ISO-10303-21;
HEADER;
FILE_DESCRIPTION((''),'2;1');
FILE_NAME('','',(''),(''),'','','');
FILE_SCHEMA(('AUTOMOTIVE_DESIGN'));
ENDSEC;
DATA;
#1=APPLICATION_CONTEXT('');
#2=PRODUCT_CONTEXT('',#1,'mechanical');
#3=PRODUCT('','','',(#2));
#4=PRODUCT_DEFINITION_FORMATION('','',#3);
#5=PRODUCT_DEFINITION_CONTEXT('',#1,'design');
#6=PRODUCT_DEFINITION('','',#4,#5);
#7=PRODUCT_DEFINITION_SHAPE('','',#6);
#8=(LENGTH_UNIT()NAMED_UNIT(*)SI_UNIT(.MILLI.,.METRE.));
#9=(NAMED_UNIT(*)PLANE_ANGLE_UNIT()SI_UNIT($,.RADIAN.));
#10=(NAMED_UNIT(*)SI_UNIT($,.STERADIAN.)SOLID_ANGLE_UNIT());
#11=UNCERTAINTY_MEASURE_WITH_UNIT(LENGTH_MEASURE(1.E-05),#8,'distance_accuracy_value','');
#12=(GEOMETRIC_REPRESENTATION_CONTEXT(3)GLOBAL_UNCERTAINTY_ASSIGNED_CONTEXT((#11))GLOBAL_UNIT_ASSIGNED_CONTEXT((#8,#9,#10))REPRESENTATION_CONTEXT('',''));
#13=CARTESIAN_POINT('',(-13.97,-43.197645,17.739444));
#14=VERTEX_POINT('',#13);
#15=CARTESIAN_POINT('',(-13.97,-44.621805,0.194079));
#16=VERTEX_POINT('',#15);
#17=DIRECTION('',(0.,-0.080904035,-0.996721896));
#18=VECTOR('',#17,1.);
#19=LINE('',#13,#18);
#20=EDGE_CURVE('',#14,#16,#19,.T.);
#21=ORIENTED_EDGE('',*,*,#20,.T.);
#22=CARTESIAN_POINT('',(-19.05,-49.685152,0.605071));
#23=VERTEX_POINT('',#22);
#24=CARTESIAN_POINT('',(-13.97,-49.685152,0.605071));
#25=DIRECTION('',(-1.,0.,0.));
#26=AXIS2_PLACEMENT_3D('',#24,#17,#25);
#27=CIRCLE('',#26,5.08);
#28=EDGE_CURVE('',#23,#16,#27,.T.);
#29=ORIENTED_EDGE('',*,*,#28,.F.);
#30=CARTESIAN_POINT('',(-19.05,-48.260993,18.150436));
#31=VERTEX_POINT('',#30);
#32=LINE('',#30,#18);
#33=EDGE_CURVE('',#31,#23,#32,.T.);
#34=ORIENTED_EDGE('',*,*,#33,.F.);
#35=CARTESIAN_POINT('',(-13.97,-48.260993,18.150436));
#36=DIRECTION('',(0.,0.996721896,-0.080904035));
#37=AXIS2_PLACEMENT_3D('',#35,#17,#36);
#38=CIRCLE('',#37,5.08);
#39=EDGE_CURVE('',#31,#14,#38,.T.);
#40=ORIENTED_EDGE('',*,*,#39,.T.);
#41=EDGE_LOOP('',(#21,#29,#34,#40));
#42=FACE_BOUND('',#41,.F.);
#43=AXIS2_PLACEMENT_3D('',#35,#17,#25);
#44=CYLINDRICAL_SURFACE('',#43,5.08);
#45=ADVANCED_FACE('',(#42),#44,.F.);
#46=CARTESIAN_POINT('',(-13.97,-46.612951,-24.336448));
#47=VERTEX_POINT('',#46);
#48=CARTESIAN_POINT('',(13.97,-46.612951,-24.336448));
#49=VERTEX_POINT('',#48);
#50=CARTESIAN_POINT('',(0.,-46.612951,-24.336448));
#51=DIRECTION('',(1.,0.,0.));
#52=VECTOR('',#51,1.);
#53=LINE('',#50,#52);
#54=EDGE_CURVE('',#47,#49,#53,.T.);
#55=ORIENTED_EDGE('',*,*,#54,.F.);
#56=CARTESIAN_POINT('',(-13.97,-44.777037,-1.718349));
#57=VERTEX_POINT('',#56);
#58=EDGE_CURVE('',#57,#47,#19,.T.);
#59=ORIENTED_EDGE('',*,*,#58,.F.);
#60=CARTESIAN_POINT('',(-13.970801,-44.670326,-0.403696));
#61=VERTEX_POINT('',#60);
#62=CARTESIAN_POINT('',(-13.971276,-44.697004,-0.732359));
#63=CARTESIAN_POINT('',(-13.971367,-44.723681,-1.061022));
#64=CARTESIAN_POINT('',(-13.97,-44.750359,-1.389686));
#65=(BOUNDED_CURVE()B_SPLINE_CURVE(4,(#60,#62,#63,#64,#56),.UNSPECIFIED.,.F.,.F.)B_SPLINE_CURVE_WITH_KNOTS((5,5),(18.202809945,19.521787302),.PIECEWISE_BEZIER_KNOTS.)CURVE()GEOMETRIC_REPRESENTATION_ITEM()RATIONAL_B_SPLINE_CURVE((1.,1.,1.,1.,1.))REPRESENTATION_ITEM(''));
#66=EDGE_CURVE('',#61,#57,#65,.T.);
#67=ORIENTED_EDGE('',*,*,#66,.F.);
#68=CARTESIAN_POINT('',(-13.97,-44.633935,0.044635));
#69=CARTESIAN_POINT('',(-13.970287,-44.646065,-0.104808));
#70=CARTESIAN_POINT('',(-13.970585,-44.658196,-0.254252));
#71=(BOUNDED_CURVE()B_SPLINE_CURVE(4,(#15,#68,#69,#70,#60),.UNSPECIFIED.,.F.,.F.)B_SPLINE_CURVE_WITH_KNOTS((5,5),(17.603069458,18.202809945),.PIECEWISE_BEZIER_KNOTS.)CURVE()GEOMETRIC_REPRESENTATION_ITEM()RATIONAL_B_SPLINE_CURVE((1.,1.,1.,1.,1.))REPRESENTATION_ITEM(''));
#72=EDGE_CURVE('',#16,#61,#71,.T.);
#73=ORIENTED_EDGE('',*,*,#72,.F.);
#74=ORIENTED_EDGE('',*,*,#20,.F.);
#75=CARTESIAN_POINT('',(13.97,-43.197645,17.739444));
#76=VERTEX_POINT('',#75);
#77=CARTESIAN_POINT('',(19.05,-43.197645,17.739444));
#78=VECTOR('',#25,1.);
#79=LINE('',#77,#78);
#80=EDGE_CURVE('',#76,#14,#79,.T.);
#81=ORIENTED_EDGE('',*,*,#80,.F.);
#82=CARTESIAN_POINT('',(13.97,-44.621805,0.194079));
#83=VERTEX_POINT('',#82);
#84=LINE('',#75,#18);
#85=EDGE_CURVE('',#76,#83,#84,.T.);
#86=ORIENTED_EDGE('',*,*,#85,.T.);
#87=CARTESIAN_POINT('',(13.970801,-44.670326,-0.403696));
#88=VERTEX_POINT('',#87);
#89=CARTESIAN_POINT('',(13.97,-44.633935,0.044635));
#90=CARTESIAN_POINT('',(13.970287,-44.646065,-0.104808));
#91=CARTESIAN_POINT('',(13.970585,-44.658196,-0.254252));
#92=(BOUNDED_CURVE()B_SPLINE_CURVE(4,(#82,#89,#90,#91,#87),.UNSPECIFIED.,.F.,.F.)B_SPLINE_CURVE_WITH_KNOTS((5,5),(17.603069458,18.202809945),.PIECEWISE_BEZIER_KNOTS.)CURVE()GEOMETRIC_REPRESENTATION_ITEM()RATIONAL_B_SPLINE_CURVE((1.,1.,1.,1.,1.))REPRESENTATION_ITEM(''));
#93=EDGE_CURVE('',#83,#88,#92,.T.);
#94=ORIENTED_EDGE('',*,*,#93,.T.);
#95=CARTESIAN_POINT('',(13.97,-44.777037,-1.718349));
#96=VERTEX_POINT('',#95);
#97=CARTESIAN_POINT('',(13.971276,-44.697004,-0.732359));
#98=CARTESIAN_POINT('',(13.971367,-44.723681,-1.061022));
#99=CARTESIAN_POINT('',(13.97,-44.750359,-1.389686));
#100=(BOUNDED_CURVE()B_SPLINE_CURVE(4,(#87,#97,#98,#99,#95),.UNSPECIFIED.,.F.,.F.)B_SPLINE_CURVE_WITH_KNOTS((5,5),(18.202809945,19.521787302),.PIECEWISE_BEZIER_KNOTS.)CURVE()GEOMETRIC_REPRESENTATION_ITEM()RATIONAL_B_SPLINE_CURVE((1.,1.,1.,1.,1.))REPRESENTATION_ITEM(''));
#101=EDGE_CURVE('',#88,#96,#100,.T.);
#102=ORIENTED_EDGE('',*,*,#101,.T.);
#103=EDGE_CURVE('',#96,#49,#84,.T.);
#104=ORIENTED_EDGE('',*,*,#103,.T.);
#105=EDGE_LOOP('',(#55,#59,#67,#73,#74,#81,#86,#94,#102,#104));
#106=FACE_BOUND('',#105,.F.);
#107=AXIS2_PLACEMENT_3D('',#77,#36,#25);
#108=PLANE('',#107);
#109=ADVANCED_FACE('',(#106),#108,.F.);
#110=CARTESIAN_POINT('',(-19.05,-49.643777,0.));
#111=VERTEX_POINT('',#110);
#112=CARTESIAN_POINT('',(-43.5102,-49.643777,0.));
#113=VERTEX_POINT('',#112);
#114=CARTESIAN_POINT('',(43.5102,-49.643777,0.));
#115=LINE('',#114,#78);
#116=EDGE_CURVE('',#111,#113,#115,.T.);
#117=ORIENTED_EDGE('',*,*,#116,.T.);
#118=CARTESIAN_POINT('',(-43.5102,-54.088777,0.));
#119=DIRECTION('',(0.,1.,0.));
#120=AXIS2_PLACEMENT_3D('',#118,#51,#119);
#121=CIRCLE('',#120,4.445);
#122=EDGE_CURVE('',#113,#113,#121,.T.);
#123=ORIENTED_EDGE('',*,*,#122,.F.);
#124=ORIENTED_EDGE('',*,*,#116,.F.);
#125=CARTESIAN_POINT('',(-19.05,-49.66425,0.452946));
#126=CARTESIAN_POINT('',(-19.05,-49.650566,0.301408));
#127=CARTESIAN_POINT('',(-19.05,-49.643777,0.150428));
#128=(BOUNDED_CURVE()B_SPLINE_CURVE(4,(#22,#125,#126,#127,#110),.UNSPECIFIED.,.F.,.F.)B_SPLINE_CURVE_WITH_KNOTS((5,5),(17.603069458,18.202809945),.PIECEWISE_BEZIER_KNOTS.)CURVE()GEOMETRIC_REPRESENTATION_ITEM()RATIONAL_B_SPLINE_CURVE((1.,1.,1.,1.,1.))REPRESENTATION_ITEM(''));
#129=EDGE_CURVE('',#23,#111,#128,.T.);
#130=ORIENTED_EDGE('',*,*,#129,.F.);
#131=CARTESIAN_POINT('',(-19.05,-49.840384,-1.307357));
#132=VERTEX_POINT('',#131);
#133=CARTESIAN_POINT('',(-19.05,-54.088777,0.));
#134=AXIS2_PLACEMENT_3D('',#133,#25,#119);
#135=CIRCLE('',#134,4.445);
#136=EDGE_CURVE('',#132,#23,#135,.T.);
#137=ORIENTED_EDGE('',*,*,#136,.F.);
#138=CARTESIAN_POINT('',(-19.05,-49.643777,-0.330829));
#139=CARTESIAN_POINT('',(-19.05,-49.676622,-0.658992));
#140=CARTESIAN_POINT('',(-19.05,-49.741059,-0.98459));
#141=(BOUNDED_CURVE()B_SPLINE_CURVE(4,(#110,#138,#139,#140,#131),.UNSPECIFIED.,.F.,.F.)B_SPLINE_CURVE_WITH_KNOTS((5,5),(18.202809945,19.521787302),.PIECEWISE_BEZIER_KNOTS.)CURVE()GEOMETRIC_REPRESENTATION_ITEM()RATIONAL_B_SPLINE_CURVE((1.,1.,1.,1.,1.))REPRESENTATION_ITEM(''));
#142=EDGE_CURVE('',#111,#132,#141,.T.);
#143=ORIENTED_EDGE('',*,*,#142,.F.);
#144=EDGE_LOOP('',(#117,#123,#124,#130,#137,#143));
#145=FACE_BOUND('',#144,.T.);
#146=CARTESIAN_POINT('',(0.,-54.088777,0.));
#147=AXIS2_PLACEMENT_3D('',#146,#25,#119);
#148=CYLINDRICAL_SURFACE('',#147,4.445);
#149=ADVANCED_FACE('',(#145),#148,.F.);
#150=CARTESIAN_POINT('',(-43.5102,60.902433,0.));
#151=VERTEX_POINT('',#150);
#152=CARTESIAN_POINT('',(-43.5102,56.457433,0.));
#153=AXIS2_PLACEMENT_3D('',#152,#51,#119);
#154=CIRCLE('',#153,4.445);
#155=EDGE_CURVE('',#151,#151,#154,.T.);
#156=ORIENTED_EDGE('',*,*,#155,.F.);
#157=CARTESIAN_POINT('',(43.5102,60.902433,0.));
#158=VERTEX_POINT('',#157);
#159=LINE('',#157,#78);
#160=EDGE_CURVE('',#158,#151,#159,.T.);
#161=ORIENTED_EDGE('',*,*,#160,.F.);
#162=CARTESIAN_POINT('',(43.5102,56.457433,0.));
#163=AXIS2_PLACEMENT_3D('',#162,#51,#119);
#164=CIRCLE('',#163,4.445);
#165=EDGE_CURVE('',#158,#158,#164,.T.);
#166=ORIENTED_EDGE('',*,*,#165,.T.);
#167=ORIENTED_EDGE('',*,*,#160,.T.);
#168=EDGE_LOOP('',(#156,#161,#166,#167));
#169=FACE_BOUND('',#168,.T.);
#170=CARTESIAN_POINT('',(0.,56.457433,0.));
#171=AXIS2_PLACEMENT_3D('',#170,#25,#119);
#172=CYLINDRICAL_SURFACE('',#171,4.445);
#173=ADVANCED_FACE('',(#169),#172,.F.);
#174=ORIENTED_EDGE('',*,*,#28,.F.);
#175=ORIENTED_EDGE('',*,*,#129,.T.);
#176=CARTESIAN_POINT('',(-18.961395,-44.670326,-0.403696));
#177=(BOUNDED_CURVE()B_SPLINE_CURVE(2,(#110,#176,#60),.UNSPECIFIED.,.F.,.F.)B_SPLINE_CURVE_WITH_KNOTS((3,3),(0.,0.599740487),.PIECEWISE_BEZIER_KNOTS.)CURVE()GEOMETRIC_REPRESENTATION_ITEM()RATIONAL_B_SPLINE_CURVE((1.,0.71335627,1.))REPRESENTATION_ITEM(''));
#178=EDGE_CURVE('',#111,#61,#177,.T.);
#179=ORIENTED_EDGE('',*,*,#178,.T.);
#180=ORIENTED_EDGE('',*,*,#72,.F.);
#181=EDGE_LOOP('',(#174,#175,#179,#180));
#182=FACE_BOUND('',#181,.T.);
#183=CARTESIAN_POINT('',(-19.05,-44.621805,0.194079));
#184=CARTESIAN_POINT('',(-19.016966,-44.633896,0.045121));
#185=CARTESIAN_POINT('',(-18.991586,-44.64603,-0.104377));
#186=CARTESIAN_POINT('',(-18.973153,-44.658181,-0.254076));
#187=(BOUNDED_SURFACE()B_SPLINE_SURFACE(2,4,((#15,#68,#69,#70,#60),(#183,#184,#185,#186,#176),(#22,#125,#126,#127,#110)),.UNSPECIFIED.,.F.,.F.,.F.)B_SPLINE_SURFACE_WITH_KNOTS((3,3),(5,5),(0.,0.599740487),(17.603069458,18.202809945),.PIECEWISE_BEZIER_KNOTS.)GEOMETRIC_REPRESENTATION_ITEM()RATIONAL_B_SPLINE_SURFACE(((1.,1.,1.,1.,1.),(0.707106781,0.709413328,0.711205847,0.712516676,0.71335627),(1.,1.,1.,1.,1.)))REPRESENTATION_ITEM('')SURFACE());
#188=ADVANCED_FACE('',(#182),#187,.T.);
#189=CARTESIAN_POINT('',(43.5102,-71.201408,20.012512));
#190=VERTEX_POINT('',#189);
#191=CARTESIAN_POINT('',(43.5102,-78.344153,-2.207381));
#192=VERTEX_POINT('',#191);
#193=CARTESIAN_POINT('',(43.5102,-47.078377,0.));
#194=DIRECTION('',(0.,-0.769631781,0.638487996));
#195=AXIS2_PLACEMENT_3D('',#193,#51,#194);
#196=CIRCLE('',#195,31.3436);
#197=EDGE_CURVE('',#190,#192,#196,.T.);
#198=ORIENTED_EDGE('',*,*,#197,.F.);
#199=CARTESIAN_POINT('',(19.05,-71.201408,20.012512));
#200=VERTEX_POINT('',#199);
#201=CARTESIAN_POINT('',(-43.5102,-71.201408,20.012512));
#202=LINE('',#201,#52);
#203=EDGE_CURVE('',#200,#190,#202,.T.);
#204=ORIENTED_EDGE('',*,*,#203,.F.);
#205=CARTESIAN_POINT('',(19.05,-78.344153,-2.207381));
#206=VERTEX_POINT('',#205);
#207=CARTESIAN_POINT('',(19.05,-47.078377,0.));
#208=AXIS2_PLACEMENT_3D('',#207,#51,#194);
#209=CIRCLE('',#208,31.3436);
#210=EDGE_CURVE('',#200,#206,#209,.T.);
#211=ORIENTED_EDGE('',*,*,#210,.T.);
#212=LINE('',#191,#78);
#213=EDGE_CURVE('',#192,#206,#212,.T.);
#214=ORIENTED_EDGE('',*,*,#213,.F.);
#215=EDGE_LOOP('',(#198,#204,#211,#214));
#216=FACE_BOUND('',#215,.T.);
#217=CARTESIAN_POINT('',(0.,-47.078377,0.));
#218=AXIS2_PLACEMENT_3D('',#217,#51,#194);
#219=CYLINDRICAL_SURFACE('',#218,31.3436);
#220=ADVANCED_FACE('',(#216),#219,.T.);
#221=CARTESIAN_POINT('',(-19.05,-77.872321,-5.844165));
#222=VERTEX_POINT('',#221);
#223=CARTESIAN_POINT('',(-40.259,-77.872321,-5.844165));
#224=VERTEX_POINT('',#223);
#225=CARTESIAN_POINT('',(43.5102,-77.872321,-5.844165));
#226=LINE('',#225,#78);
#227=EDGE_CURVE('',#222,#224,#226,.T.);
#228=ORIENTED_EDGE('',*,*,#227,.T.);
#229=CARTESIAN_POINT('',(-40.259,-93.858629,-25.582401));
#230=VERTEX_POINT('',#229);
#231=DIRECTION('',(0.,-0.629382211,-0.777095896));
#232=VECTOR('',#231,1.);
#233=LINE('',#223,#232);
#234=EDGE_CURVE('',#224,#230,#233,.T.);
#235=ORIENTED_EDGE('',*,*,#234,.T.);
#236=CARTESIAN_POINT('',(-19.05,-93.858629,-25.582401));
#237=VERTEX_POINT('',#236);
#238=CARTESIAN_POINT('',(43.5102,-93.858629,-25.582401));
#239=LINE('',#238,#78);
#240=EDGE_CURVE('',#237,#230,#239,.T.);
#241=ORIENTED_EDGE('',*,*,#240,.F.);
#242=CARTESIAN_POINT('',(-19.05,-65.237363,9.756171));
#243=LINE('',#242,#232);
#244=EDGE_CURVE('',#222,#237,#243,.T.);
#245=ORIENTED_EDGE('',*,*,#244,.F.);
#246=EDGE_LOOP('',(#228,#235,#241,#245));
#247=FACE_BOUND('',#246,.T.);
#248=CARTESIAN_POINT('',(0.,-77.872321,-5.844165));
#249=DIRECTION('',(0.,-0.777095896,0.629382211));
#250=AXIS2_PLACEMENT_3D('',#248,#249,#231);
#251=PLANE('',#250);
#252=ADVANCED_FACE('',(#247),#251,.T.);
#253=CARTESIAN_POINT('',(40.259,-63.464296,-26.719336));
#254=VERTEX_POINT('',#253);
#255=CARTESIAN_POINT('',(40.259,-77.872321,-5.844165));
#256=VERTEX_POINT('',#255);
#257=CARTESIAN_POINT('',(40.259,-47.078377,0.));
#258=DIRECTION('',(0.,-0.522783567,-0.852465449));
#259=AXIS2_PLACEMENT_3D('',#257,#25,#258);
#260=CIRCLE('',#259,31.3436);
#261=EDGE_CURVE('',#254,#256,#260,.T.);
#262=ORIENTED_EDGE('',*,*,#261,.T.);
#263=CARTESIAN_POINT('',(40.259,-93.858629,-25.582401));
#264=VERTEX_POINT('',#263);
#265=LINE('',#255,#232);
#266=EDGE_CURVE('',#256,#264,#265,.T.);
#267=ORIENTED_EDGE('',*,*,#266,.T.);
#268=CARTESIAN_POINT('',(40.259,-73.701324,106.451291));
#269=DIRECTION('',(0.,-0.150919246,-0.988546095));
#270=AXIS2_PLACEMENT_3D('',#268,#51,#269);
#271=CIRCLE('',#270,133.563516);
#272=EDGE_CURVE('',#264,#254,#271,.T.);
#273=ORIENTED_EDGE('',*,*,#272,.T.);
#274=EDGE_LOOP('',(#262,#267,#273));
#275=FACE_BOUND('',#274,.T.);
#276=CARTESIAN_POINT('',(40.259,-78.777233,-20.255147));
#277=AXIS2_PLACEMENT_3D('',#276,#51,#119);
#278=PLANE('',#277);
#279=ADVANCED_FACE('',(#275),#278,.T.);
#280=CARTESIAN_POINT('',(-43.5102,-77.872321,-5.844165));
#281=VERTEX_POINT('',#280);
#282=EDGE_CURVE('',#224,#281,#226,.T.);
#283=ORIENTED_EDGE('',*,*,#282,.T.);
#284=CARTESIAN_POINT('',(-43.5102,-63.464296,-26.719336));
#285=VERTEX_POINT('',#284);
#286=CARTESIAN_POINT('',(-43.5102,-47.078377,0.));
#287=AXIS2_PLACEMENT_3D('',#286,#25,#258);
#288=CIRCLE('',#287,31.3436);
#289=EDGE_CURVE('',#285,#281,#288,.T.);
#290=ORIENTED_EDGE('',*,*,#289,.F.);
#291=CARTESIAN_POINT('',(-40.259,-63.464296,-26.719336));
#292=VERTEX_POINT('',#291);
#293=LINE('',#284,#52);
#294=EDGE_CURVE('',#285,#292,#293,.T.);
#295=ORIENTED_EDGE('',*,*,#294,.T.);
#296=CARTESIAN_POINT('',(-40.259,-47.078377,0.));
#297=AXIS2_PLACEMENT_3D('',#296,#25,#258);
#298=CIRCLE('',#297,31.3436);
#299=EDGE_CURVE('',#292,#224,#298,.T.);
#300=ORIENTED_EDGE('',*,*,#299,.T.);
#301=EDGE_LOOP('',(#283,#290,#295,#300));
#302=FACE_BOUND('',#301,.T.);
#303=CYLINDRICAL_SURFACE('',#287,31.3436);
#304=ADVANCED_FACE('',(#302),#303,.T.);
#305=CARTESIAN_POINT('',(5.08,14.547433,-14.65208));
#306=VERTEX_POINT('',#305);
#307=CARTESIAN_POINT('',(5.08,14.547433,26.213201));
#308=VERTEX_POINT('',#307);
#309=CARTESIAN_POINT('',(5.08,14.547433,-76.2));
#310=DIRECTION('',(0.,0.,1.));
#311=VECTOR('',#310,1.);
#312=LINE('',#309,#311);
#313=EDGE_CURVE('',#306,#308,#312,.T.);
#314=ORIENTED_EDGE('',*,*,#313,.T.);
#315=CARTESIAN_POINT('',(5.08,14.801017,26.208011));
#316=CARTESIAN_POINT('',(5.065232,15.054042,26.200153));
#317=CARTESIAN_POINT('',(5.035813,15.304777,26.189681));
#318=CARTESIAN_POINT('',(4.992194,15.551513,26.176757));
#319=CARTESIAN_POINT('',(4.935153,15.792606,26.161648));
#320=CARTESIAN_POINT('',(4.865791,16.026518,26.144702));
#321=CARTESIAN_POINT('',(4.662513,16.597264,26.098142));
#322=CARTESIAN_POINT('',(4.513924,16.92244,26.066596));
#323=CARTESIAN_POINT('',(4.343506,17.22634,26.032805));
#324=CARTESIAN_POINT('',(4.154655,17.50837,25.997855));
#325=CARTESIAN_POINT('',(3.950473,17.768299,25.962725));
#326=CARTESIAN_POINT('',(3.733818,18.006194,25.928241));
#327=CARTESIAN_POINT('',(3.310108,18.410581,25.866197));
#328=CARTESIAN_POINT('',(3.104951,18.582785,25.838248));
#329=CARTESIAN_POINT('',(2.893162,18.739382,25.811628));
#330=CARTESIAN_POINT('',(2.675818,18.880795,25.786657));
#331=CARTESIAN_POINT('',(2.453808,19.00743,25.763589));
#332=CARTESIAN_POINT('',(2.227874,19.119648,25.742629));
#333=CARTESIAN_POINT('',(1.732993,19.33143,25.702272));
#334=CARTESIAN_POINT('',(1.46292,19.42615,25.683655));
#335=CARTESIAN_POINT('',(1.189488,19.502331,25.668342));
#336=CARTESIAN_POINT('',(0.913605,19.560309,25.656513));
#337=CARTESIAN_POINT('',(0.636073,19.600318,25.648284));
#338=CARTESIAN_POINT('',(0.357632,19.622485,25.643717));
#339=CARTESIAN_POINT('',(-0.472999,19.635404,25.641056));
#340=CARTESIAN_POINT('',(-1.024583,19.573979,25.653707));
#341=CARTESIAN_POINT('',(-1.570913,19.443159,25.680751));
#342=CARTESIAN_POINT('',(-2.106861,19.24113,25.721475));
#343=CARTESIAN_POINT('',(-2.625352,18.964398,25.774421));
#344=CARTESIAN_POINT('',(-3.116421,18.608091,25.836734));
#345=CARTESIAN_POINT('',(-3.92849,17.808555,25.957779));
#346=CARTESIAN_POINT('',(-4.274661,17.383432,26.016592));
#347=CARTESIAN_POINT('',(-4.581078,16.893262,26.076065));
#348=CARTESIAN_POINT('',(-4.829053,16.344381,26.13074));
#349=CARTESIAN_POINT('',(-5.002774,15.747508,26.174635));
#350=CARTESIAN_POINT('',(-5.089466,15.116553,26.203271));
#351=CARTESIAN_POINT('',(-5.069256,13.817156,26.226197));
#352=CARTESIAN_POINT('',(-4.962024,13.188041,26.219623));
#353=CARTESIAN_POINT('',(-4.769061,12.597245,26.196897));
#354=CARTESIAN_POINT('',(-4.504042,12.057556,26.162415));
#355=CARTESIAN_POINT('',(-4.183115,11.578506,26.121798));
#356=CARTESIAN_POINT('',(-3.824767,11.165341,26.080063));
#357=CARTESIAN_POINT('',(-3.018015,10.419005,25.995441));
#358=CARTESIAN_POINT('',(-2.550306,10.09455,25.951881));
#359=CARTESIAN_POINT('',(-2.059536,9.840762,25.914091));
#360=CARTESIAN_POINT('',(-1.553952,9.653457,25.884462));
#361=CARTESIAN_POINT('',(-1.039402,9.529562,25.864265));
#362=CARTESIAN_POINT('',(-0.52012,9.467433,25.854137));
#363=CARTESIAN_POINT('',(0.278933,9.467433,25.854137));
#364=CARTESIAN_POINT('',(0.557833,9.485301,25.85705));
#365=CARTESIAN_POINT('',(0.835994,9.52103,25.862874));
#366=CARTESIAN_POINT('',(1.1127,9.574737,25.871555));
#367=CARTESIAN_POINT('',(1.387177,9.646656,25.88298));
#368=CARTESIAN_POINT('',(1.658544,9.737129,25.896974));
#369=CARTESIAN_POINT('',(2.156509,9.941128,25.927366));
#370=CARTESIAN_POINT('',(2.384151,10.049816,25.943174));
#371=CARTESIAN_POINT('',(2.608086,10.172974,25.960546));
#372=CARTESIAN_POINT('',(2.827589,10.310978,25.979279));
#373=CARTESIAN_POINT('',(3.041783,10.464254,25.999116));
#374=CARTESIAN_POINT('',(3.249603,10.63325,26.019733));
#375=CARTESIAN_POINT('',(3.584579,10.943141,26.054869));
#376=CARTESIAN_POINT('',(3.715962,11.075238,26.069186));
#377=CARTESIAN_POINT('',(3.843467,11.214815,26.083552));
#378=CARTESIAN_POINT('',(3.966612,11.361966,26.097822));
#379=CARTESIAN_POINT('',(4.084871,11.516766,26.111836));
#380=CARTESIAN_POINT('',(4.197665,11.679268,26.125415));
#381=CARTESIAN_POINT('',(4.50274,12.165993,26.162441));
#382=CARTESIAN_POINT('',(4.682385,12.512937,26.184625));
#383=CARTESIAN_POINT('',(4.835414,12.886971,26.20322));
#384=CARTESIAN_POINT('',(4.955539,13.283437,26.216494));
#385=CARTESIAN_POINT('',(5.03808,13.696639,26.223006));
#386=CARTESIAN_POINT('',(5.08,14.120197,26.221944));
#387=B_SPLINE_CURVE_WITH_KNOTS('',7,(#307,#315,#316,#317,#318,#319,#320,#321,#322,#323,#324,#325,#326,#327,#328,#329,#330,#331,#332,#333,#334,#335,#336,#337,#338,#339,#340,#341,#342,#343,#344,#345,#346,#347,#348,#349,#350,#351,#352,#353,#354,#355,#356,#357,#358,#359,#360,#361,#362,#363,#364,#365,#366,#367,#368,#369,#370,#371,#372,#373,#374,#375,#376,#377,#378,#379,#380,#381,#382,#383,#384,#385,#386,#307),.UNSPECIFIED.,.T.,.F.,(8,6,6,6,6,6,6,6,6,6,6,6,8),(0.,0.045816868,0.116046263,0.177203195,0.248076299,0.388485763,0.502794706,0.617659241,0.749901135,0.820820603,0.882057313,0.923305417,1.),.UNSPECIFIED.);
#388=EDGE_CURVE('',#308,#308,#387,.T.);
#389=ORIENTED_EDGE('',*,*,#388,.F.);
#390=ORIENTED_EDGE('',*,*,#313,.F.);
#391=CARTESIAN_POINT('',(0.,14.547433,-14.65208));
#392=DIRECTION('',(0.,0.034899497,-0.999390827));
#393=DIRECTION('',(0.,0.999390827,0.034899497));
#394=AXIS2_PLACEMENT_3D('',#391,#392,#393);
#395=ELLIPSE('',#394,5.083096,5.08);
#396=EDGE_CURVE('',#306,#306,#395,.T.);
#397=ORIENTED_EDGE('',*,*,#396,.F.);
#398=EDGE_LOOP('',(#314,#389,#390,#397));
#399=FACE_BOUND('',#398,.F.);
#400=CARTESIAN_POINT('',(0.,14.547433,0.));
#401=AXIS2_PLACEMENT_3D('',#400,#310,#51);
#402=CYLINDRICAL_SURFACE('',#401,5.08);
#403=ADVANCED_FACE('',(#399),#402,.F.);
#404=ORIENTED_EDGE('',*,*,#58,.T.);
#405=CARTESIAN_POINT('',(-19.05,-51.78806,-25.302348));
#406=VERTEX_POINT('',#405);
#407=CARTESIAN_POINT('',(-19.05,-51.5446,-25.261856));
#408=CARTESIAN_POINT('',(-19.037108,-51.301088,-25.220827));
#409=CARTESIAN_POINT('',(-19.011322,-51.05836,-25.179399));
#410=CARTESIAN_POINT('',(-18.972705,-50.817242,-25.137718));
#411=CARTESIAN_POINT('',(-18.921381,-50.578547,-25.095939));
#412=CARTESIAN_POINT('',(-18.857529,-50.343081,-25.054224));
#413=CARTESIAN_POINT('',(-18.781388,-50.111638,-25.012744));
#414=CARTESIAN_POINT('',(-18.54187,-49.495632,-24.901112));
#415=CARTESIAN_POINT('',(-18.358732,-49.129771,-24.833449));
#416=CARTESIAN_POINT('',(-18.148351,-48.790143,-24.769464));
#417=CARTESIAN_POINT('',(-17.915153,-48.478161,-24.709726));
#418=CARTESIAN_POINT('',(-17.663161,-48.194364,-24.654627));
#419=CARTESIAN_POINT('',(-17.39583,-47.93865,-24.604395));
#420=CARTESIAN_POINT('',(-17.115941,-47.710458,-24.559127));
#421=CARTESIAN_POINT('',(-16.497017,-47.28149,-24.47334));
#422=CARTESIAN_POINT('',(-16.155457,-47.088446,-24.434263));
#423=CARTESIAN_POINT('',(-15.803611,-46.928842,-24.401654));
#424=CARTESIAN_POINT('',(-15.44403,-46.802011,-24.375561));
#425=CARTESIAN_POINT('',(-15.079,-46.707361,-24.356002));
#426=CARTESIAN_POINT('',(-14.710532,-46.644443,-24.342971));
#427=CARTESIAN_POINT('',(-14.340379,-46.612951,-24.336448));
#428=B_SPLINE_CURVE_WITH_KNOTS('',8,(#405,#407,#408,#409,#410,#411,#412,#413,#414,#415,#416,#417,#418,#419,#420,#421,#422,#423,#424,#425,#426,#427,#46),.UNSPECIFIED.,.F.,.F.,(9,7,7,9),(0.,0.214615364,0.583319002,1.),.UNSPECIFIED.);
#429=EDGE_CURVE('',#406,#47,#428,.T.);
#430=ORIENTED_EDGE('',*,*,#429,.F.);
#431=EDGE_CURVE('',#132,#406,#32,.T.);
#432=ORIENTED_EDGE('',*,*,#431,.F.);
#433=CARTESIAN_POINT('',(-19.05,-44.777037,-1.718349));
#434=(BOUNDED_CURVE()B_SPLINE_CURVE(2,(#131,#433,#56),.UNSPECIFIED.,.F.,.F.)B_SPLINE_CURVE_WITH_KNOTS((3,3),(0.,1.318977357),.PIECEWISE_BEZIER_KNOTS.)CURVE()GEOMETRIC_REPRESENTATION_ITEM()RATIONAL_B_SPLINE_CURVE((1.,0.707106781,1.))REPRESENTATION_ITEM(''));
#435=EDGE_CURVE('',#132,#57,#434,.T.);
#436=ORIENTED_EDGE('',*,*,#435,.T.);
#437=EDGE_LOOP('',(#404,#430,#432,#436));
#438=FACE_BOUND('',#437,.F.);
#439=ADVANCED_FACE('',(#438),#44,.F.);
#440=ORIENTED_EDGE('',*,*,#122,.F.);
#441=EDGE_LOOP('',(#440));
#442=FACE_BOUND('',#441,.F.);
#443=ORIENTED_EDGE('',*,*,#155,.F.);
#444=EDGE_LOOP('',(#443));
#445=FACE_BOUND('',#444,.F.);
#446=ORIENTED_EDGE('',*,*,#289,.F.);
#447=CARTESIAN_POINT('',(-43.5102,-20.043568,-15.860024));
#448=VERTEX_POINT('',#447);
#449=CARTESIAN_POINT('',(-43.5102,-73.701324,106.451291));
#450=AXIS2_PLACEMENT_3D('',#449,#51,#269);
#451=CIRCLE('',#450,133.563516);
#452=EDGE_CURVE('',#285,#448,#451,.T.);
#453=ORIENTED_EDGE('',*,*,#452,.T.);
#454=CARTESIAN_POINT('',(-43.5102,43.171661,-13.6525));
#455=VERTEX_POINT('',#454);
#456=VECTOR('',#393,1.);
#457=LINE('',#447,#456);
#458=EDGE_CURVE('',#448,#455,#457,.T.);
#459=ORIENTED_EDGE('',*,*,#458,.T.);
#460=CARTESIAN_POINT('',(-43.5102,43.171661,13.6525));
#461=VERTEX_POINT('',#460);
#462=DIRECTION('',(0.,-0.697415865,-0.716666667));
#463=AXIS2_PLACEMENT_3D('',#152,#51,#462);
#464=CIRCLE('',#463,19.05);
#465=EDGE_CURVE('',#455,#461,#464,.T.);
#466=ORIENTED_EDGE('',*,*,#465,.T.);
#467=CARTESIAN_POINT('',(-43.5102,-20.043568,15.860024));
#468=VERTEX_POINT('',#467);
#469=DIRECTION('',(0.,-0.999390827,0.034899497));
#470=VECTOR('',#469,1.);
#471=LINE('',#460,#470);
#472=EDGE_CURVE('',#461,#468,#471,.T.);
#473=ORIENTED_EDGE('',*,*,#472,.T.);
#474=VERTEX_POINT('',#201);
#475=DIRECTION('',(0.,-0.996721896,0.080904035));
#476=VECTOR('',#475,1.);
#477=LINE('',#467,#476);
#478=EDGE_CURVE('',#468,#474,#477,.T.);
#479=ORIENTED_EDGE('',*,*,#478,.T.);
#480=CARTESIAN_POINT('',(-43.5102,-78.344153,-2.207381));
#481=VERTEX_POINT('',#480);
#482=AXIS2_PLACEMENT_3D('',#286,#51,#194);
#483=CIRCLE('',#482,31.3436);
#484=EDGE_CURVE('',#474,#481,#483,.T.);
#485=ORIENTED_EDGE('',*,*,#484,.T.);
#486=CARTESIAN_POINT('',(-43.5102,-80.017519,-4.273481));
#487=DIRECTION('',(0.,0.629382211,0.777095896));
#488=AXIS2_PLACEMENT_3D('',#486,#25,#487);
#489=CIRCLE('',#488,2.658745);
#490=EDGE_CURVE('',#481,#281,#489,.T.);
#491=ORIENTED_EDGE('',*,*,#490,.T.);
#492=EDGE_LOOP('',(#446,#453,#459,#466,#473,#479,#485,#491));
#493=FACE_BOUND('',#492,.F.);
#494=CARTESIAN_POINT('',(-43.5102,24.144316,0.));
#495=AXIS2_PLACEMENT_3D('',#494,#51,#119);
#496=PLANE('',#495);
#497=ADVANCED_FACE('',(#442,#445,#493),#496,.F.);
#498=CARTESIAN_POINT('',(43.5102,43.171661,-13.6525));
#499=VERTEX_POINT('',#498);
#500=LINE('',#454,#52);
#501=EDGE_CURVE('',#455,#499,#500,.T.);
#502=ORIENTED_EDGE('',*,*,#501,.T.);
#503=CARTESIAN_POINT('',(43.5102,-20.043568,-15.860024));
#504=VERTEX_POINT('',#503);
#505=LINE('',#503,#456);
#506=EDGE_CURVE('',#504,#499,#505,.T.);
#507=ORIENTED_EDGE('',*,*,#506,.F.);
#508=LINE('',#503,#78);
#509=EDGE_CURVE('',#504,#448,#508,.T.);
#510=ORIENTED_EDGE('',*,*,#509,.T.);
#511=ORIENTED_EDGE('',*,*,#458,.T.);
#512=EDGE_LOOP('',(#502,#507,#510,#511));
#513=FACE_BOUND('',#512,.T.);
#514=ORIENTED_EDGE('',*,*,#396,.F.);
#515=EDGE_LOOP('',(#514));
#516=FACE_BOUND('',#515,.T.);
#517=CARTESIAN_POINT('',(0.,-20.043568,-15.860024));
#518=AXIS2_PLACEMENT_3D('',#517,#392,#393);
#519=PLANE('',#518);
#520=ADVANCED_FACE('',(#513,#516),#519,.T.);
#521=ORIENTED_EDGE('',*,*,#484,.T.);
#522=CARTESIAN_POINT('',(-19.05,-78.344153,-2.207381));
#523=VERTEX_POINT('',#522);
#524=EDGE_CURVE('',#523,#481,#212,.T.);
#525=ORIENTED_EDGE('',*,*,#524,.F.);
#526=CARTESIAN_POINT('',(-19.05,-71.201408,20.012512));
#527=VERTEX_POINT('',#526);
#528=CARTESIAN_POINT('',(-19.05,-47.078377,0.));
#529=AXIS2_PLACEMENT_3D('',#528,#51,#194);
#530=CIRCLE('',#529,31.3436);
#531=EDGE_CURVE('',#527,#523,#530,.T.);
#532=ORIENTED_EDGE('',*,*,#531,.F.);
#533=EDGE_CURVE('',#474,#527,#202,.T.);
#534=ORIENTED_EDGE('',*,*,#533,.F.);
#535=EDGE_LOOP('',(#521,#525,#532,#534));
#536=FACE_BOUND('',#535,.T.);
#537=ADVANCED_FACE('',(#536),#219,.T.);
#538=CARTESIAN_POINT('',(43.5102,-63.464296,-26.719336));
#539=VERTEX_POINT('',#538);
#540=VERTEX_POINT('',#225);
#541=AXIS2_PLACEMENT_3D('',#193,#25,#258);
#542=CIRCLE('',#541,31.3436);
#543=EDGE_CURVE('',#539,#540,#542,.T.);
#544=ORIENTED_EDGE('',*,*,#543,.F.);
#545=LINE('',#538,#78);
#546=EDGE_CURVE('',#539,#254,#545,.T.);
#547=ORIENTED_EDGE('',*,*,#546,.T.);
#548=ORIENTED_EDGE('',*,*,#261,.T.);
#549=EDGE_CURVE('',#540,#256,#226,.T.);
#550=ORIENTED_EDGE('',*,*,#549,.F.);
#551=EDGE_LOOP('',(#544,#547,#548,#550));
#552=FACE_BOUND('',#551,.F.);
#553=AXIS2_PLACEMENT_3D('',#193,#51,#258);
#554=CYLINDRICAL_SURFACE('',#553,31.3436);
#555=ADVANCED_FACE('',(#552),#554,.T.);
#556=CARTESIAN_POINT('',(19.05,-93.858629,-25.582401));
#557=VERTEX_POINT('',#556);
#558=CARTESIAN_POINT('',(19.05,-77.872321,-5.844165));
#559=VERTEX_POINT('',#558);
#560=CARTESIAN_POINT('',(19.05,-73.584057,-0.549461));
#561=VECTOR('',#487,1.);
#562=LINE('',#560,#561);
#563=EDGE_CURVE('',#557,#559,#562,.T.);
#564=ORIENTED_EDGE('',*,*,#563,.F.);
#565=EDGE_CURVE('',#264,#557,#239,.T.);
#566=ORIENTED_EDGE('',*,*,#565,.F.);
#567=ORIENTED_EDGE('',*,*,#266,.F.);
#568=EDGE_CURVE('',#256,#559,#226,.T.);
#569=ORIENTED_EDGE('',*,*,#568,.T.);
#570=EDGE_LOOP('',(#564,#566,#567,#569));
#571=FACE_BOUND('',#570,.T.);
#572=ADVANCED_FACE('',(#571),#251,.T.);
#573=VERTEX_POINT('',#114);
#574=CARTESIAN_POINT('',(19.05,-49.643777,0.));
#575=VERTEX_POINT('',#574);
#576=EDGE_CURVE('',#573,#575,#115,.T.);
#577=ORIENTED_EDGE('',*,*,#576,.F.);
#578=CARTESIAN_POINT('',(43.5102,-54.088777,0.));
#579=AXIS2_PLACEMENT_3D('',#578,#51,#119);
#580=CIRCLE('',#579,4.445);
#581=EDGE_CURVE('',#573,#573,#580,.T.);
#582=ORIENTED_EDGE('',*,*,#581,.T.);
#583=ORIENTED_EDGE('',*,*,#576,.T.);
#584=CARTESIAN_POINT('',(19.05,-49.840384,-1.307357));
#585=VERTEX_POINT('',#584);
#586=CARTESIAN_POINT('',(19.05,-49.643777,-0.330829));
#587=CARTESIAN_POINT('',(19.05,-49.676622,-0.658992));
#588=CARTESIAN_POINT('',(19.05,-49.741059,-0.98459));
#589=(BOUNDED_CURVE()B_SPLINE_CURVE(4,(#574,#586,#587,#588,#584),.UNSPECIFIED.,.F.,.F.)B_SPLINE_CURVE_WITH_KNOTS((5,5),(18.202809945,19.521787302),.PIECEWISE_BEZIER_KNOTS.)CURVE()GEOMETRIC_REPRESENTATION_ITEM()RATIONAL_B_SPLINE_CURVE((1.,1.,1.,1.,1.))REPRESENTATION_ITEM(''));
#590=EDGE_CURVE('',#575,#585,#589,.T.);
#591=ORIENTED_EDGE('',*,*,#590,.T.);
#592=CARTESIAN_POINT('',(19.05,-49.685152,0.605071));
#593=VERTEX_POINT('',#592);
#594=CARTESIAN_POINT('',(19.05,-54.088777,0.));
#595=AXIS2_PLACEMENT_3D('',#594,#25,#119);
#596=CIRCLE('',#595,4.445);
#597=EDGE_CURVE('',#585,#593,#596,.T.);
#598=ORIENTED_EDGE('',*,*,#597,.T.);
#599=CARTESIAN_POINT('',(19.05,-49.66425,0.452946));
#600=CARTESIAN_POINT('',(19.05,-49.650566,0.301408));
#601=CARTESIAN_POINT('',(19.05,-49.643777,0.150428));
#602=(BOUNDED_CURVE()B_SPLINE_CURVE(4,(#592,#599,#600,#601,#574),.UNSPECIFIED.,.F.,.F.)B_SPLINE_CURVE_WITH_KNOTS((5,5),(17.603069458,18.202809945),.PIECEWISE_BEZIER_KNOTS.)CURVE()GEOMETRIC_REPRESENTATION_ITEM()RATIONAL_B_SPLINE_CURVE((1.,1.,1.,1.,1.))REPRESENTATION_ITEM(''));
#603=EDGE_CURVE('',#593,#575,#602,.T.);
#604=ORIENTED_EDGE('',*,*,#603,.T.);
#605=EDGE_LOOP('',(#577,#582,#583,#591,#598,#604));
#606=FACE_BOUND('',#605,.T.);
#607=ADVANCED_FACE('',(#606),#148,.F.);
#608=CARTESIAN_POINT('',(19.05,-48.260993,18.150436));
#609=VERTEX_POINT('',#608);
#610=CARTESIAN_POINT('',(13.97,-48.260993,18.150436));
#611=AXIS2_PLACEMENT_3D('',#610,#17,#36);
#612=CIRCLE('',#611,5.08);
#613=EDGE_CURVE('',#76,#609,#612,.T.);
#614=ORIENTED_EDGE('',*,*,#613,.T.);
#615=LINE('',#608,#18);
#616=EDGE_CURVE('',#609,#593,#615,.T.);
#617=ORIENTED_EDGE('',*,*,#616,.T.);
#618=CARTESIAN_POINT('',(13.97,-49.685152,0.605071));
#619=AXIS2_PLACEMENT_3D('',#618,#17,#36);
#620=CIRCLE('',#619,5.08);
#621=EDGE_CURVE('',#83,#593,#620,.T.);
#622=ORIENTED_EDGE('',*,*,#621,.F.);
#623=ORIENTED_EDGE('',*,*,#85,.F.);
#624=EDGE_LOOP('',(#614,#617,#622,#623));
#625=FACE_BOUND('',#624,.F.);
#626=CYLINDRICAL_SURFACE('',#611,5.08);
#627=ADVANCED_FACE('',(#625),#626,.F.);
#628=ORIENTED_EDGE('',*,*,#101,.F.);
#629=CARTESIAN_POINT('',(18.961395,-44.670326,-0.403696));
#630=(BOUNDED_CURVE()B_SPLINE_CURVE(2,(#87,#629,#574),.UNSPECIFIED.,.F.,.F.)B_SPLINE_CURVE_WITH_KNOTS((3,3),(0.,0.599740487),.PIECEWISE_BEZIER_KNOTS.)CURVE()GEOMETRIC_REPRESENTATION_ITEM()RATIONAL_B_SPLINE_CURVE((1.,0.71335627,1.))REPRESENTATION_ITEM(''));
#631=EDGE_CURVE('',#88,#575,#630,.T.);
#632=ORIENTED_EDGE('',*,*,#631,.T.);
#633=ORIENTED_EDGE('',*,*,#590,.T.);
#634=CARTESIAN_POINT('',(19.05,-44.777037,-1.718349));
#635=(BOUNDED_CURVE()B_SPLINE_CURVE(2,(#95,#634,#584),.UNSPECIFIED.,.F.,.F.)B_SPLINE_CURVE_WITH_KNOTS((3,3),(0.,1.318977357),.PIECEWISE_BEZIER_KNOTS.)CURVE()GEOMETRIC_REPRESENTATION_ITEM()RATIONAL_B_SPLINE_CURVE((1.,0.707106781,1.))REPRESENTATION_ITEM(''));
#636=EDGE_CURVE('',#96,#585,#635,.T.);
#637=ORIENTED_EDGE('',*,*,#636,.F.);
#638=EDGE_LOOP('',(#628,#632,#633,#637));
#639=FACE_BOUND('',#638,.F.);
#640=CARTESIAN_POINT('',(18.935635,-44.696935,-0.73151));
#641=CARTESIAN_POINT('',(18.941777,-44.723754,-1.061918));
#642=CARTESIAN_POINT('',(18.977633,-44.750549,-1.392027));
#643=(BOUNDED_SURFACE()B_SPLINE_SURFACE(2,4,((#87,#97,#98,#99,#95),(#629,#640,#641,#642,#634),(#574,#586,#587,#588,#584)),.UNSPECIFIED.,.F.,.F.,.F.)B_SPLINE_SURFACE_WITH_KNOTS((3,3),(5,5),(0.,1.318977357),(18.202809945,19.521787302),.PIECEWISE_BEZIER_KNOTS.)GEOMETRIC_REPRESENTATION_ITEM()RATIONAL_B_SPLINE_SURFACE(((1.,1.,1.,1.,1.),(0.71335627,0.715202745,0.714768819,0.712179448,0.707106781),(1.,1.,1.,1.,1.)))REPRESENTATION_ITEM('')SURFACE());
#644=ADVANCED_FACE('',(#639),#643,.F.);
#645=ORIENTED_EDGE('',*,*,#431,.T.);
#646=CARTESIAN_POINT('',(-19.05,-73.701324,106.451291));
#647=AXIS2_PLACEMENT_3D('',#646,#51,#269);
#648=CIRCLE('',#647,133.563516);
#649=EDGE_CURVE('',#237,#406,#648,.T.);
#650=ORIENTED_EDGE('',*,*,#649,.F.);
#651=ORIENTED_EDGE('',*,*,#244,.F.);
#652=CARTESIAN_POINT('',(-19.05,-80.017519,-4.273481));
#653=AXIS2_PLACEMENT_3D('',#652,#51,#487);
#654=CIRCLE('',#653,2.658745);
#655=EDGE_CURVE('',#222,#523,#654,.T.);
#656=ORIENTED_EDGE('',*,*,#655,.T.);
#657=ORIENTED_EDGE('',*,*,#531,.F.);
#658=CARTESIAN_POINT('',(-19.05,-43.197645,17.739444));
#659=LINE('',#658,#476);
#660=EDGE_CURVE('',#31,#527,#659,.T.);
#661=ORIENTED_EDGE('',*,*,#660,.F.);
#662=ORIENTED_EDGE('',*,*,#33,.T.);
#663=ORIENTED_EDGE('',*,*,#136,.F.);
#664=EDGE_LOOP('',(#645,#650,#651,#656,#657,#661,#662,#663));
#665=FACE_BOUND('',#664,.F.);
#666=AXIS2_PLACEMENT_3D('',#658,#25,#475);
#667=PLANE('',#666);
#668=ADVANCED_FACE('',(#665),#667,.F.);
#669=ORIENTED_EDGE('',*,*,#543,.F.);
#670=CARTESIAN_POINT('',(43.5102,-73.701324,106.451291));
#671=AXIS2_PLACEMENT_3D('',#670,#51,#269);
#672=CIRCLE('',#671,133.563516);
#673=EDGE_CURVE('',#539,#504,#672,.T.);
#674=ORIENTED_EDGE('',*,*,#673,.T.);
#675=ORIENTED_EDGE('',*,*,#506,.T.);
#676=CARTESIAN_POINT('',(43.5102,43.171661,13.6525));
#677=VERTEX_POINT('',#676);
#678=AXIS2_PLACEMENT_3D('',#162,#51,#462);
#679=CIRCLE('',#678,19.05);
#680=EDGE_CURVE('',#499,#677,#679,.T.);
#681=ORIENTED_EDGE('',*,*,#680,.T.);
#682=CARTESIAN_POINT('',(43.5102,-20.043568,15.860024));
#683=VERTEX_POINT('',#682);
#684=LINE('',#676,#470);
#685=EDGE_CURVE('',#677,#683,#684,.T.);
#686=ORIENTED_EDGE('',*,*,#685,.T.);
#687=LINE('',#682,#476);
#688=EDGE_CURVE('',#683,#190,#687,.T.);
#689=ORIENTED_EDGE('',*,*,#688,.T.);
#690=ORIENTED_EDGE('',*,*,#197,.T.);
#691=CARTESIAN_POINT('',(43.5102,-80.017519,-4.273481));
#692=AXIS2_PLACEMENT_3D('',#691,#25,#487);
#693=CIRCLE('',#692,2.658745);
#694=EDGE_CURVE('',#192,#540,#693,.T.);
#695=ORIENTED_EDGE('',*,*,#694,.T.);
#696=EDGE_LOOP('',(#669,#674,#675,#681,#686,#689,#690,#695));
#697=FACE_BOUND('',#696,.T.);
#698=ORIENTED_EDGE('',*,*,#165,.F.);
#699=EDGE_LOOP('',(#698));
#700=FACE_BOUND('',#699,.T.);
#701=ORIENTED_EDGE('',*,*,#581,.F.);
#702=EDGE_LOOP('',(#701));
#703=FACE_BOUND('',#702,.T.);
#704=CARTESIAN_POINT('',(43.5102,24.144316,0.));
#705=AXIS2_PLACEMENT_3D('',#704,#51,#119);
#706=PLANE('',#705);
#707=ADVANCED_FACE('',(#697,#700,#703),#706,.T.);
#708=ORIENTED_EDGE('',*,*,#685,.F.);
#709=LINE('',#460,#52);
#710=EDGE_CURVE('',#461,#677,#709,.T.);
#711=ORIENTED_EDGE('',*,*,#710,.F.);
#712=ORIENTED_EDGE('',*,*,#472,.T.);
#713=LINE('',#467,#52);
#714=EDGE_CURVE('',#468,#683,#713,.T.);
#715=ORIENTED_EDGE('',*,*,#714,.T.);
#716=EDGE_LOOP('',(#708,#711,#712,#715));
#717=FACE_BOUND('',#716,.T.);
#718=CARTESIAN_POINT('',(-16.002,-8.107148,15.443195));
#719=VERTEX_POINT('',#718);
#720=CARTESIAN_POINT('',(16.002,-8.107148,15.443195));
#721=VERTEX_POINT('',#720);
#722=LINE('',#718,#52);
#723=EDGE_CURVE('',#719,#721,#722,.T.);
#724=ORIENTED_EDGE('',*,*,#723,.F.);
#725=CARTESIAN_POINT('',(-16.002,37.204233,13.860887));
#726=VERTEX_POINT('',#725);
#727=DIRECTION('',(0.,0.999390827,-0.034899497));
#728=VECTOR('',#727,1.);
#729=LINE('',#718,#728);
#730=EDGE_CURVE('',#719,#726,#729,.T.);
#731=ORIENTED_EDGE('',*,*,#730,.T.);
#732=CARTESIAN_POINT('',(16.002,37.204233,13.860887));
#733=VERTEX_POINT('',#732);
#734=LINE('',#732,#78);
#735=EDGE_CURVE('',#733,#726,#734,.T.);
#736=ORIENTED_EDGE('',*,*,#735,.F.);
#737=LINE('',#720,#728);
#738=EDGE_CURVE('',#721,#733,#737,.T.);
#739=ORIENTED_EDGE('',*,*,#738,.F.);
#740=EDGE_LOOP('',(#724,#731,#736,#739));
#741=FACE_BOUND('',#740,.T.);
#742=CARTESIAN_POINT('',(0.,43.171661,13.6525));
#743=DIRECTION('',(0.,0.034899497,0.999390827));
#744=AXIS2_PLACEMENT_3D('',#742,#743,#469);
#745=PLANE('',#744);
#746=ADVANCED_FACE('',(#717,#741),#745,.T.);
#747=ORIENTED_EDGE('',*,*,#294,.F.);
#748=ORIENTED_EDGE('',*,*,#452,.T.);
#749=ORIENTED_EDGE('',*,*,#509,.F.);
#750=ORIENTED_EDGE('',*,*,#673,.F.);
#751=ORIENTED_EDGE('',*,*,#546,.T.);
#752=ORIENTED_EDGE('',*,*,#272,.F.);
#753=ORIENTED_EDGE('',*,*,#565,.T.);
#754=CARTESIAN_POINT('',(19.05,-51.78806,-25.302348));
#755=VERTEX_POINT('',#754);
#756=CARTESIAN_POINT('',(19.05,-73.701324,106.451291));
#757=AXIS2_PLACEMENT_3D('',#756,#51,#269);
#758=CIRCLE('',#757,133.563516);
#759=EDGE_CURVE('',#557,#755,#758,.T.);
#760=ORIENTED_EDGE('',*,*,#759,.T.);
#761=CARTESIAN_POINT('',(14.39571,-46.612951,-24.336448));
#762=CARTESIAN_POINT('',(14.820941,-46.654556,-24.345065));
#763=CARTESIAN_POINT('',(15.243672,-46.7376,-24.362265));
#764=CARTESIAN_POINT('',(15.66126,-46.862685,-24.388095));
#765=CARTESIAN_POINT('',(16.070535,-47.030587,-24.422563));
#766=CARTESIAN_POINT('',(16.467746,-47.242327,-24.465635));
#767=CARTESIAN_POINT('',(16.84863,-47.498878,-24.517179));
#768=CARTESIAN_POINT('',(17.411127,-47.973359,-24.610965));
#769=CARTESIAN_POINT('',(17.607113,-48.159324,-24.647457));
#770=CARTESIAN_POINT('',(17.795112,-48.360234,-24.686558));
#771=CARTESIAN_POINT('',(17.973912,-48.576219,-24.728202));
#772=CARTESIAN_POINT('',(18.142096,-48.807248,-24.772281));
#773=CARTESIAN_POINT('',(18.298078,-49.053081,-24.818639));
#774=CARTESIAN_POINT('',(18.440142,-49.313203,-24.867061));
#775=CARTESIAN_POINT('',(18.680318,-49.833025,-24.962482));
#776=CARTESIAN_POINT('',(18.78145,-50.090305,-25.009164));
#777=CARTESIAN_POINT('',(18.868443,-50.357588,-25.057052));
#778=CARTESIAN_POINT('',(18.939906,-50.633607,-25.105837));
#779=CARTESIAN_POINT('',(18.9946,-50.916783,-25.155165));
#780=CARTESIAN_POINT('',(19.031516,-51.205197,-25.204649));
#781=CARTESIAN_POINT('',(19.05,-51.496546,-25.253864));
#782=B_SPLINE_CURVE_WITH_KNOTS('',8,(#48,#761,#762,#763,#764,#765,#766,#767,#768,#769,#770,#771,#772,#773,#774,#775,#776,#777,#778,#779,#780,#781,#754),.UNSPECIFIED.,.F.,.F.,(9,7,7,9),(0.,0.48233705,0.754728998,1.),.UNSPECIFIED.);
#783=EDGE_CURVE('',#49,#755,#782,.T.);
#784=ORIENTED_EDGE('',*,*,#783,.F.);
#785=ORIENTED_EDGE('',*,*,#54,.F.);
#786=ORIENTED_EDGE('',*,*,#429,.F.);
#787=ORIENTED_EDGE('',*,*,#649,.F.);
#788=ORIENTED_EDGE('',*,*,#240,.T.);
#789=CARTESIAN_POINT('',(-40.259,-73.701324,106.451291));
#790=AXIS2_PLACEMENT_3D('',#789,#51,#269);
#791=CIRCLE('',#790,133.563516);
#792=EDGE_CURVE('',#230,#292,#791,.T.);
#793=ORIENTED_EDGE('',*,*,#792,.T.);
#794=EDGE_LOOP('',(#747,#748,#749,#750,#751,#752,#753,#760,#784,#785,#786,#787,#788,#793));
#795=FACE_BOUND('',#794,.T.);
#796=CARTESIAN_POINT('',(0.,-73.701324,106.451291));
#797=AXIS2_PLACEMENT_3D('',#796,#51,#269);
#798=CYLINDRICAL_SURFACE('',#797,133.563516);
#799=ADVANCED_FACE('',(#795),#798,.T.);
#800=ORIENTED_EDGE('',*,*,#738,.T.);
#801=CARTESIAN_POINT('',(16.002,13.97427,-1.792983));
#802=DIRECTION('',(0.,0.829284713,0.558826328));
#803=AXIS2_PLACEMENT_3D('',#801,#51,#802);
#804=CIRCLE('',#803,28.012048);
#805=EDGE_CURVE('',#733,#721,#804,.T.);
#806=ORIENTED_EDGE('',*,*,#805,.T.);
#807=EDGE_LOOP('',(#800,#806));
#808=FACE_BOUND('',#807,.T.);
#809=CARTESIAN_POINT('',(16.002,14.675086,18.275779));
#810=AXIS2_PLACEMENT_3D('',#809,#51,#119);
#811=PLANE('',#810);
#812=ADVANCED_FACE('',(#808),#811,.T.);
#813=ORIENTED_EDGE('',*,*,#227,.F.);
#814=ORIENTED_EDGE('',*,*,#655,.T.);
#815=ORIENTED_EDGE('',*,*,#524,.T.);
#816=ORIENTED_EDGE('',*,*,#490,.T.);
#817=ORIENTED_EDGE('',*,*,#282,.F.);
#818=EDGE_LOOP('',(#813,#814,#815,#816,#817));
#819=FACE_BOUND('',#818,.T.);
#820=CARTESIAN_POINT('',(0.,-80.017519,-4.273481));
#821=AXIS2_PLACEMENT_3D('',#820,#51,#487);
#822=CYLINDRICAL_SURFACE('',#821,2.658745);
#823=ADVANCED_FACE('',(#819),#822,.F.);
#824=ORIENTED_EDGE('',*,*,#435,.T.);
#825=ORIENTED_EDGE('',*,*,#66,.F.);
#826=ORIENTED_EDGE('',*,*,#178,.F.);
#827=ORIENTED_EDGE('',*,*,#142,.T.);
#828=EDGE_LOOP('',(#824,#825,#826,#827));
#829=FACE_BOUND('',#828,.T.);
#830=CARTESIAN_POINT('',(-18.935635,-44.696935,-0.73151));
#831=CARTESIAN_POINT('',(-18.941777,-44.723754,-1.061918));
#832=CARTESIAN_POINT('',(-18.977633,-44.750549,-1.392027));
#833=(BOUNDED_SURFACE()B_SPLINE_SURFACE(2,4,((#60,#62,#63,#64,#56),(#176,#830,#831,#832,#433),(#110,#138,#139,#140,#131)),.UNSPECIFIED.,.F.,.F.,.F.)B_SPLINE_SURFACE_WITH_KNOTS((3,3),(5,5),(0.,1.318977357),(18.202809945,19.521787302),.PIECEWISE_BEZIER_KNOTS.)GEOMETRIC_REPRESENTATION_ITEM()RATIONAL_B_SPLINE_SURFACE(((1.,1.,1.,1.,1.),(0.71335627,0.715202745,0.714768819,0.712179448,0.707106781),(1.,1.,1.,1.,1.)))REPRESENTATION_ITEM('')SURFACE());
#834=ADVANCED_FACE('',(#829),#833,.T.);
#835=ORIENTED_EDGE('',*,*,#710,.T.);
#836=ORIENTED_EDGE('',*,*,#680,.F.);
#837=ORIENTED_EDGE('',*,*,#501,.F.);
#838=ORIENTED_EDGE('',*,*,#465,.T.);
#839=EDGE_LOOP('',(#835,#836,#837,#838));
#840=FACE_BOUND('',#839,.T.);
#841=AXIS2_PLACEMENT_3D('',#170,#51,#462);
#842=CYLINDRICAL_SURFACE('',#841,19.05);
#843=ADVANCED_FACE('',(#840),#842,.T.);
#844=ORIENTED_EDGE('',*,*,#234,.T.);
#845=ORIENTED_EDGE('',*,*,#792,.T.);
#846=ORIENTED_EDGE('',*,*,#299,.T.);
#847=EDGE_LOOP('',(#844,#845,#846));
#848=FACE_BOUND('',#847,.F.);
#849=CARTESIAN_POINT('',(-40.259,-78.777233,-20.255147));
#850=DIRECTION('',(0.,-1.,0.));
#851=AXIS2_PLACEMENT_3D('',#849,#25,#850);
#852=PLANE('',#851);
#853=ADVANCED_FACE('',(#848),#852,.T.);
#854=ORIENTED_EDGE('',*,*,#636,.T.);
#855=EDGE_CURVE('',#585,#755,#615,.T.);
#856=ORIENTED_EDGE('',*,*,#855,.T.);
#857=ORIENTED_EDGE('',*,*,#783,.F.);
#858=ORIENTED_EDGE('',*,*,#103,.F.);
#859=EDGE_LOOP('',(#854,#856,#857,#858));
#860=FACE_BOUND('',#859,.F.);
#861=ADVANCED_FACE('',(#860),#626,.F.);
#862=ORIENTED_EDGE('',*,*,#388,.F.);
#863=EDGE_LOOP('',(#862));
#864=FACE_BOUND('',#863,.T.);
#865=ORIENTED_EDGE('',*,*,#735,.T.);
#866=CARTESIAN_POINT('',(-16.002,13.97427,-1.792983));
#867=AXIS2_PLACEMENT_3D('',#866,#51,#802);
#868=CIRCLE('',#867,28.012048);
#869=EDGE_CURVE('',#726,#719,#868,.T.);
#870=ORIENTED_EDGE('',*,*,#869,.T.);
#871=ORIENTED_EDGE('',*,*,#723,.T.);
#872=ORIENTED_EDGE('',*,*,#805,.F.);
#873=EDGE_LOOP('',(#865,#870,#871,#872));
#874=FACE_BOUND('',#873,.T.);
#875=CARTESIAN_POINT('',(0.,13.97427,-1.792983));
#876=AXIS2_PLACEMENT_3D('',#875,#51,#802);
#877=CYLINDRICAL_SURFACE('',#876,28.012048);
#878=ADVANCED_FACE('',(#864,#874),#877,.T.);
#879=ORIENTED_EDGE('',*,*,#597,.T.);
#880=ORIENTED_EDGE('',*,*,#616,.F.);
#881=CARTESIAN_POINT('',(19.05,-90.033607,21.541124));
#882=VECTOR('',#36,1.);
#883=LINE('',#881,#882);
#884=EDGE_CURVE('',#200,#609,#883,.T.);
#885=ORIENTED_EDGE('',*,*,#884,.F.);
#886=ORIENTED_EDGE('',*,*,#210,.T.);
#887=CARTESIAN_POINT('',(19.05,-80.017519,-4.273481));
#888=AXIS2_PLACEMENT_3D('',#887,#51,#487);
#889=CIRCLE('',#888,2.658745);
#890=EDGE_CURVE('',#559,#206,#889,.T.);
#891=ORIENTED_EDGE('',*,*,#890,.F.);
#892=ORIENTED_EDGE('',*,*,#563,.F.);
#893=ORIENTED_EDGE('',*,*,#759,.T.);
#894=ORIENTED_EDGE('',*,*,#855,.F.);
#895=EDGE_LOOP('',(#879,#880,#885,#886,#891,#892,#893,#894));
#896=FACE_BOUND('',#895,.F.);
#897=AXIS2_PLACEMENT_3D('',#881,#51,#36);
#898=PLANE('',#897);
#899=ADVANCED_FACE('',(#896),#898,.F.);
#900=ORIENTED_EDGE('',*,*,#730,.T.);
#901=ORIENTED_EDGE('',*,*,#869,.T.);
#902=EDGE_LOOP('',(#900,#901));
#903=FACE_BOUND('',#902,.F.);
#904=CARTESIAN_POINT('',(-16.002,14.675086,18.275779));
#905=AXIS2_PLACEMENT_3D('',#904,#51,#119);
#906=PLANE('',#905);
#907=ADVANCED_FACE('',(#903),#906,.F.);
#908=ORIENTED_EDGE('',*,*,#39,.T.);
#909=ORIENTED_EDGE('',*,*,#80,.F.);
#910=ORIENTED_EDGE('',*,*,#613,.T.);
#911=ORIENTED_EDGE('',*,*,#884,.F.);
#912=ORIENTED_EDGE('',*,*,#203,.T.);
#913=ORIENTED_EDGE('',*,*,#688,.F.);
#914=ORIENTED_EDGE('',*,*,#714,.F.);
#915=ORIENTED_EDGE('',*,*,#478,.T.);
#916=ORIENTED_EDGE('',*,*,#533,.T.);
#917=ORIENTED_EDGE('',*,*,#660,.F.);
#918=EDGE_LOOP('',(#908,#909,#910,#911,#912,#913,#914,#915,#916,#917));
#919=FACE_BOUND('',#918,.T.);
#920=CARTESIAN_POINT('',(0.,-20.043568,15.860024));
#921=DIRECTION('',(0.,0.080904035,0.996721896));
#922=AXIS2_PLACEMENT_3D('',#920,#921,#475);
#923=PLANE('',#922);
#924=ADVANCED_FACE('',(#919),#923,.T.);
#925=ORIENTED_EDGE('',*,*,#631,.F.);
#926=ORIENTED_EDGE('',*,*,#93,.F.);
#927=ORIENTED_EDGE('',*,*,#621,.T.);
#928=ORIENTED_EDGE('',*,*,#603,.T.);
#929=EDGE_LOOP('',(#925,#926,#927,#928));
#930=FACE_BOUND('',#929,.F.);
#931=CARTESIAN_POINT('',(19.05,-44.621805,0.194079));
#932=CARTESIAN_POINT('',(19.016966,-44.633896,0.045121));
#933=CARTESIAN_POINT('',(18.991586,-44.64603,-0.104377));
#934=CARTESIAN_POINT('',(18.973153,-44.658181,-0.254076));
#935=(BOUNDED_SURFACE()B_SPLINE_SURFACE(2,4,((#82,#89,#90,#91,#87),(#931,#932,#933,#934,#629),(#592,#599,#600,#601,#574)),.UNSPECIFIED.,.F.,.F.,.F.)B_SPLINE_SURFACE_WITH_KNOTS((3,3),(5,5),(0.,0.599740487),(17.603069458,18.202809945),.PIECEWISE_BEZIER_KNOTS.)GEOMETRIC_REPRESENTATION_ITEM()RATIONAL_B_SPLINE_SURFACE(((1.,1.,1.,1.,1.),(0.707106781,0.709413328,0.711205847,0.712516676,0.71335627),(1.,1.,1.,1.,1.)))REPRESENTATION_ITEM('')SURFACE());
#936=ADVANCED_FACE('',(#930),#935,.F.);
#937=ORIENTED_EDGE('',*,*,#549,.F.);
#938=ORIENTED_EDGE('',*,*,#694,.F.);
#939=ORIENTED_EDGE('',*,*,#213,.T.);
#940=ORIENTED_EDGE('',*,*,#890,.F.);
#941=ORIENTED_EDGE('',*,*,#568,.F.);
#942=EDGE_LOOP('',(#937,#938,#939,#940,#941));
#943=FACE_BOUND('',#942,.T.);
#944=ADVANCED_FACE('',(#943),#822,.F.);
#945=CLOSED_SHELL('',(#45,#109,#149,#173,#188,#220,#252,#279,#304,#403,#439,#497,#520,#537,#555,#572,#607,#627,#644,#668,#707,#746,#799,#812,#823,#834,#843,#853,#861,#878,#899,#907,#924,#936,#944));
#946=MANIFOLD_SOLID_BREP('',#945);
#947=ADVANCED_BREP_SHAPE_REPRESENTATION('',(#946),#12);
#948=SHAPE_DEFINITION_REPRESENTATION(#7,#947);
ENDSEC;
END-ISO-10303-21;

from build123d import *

# Parameters (mm, degrees)
F0_R      = 4.445
F1_DEPTH  = 43.5102
F4_DEPTH  = 16.002
F5_R      = 5.08
F6_DEPTH  = 76.2
F8_DEPTH  = 3.2512
F10_DEPTH = 48.8043176288
F11_R     = 5.08


# Not quite as in the source:
# - a pattern or mirror of a feature is missing from the dataset's text; its kind, count and spacing are read off the source's solid


with BuildPart() as f1:
    # F0 (on Right) → F1 (new body, symmetric)
    with BuildSketch(Plane.YZ):
        with BuildLine():
            Line((-20.0435682294, -15.8600244388), (43.1716607283, -13.6525))
            ThreePointArc((43.1716607283, -13.6525), (75.5074329584, 0), (43.1716607283, 13.6525))
            Line((43.1716607283, 13.6525), (-20.0435682294, 15.8600244388))
            ThreePointArc((-20.0435682294, 15.8600244388), (-15.7347770092, 0), (-20.0435682294, -15.8600244388))
        make_face()
        with Locations((56.4574329584, 0)):
            Circle(F0_R, mode=Mode.SUBTRACT)
        with BuildLine():
            ThreePointArc((-93.8586293632, -25.5824005626), (-56.2599595636, -25.9685392928), (-20.0435682294, -15.8600244388))
            ThreePointArc((-20.0435682294, -15.8600244388), (-15.7347770092, 0), (-20.0435682294, 15.8600244388))
            Line((-20.0435682294, 15.8600244388), (-71.2014077133, 20.0125123513))
            ThreePointArc((-71.2014077133, 20.0125123513), (-76.9181304267, 9.5922039668), (-78.3441527071, -2.2073810202))
            ThreePointArc((-78.3441527071, -2.2073810202), (-77.3808721828, -3.9314055649), (-77.8723212002, -5.8441647924))
            Line((-77.8723212002, -5.8441647924), (-93.8586293632, -25.5824005626))
        make_face()
        with Locations((-54.0887770092, 0)):
            Circle(F0_R, mode=Mode.SUBTRACT)
    extrude(amount=F1_DEPTH, both=True)

    # F3 (on Right) → F4 (join, symmetric)
    with BuildSketch(Plane.YZ):
        with BuildLine():
            ThreePointArc((37.2042329584, 13.8608871696), (14.9518760887, 26.202001098), (-8.1071477478, 15.4431954506))
            Line((-8.1071477478, 15.4431954506), (37.2042329584, 13.8608871696))
        make_face()
    extrude(amount=F4_DEPTH, both=True)

    # F5 (on Top) → F6 (cut, symmetric)
    with BuildSketch(Plane.XY):
        with Locations((0, 14.5474329584)):
            Circle(F5_R)
    extrude(amount=F6_DEPTH, both=True, mode=Mode.SUBTRACT)

    # F7 (on face) → F8 (cut)
    with BuildSketch(Plane.YZ.offset(43.5102)):
        with BuildLine():
            ThreePointArc((-63.4642960228, -26.7193360516), (-72.8742694492, -17.8043026874), (-77.8723212002, -5.8441647924))
            Line((-77.8723212002, -5.8441647924), (-93.8586293632, -25.5824005626))
            ThreePointArc((-93.8586293632, -25.5824005626), (-78.69393168, -27.0188799259), (-63.4642960228, -26.7193360516))
        make_face()
    f8 = extrude(amount=-F8_DEPTH, mode=Mode.SUBTRACT)

    # F8_copies: F8 across plane
    add(f8.mirror(Plane(origin=(0, 0, 0), x_dir=(0, 0, -1), z_dir=(-1, 0, 0))), mode=Mode.SUBTRACT)

    # F9 (on face) → F10 (cut, through all)
    with BuildSketch(Plane(origin=(0, 1.1477392706, 14.1399234898), x_dir=(1, 0, 0), z_dir=(0, 0.0809040348, 0.9967218956))):
        Polygon((19.05, -91.4812315527), (19.05, -44.4912315527), (0, -44.4912315527), (-19.05, -44.4912315527), (-19.05, -91.4812315527), align=None)
    extrude(amount=-F10_DEPTH, mode=Mode.SUBTRACT)

    # F11
    f11_edges = [f1.edges().sort_by_distance(p)[0] for p in [
        (19.05, -44.905298, -3.298502),
        (-19.05, -44.905298, -3.298502),
    ]]
    fillet(f11_edges, radius=F11_R)


solid = f1.part
